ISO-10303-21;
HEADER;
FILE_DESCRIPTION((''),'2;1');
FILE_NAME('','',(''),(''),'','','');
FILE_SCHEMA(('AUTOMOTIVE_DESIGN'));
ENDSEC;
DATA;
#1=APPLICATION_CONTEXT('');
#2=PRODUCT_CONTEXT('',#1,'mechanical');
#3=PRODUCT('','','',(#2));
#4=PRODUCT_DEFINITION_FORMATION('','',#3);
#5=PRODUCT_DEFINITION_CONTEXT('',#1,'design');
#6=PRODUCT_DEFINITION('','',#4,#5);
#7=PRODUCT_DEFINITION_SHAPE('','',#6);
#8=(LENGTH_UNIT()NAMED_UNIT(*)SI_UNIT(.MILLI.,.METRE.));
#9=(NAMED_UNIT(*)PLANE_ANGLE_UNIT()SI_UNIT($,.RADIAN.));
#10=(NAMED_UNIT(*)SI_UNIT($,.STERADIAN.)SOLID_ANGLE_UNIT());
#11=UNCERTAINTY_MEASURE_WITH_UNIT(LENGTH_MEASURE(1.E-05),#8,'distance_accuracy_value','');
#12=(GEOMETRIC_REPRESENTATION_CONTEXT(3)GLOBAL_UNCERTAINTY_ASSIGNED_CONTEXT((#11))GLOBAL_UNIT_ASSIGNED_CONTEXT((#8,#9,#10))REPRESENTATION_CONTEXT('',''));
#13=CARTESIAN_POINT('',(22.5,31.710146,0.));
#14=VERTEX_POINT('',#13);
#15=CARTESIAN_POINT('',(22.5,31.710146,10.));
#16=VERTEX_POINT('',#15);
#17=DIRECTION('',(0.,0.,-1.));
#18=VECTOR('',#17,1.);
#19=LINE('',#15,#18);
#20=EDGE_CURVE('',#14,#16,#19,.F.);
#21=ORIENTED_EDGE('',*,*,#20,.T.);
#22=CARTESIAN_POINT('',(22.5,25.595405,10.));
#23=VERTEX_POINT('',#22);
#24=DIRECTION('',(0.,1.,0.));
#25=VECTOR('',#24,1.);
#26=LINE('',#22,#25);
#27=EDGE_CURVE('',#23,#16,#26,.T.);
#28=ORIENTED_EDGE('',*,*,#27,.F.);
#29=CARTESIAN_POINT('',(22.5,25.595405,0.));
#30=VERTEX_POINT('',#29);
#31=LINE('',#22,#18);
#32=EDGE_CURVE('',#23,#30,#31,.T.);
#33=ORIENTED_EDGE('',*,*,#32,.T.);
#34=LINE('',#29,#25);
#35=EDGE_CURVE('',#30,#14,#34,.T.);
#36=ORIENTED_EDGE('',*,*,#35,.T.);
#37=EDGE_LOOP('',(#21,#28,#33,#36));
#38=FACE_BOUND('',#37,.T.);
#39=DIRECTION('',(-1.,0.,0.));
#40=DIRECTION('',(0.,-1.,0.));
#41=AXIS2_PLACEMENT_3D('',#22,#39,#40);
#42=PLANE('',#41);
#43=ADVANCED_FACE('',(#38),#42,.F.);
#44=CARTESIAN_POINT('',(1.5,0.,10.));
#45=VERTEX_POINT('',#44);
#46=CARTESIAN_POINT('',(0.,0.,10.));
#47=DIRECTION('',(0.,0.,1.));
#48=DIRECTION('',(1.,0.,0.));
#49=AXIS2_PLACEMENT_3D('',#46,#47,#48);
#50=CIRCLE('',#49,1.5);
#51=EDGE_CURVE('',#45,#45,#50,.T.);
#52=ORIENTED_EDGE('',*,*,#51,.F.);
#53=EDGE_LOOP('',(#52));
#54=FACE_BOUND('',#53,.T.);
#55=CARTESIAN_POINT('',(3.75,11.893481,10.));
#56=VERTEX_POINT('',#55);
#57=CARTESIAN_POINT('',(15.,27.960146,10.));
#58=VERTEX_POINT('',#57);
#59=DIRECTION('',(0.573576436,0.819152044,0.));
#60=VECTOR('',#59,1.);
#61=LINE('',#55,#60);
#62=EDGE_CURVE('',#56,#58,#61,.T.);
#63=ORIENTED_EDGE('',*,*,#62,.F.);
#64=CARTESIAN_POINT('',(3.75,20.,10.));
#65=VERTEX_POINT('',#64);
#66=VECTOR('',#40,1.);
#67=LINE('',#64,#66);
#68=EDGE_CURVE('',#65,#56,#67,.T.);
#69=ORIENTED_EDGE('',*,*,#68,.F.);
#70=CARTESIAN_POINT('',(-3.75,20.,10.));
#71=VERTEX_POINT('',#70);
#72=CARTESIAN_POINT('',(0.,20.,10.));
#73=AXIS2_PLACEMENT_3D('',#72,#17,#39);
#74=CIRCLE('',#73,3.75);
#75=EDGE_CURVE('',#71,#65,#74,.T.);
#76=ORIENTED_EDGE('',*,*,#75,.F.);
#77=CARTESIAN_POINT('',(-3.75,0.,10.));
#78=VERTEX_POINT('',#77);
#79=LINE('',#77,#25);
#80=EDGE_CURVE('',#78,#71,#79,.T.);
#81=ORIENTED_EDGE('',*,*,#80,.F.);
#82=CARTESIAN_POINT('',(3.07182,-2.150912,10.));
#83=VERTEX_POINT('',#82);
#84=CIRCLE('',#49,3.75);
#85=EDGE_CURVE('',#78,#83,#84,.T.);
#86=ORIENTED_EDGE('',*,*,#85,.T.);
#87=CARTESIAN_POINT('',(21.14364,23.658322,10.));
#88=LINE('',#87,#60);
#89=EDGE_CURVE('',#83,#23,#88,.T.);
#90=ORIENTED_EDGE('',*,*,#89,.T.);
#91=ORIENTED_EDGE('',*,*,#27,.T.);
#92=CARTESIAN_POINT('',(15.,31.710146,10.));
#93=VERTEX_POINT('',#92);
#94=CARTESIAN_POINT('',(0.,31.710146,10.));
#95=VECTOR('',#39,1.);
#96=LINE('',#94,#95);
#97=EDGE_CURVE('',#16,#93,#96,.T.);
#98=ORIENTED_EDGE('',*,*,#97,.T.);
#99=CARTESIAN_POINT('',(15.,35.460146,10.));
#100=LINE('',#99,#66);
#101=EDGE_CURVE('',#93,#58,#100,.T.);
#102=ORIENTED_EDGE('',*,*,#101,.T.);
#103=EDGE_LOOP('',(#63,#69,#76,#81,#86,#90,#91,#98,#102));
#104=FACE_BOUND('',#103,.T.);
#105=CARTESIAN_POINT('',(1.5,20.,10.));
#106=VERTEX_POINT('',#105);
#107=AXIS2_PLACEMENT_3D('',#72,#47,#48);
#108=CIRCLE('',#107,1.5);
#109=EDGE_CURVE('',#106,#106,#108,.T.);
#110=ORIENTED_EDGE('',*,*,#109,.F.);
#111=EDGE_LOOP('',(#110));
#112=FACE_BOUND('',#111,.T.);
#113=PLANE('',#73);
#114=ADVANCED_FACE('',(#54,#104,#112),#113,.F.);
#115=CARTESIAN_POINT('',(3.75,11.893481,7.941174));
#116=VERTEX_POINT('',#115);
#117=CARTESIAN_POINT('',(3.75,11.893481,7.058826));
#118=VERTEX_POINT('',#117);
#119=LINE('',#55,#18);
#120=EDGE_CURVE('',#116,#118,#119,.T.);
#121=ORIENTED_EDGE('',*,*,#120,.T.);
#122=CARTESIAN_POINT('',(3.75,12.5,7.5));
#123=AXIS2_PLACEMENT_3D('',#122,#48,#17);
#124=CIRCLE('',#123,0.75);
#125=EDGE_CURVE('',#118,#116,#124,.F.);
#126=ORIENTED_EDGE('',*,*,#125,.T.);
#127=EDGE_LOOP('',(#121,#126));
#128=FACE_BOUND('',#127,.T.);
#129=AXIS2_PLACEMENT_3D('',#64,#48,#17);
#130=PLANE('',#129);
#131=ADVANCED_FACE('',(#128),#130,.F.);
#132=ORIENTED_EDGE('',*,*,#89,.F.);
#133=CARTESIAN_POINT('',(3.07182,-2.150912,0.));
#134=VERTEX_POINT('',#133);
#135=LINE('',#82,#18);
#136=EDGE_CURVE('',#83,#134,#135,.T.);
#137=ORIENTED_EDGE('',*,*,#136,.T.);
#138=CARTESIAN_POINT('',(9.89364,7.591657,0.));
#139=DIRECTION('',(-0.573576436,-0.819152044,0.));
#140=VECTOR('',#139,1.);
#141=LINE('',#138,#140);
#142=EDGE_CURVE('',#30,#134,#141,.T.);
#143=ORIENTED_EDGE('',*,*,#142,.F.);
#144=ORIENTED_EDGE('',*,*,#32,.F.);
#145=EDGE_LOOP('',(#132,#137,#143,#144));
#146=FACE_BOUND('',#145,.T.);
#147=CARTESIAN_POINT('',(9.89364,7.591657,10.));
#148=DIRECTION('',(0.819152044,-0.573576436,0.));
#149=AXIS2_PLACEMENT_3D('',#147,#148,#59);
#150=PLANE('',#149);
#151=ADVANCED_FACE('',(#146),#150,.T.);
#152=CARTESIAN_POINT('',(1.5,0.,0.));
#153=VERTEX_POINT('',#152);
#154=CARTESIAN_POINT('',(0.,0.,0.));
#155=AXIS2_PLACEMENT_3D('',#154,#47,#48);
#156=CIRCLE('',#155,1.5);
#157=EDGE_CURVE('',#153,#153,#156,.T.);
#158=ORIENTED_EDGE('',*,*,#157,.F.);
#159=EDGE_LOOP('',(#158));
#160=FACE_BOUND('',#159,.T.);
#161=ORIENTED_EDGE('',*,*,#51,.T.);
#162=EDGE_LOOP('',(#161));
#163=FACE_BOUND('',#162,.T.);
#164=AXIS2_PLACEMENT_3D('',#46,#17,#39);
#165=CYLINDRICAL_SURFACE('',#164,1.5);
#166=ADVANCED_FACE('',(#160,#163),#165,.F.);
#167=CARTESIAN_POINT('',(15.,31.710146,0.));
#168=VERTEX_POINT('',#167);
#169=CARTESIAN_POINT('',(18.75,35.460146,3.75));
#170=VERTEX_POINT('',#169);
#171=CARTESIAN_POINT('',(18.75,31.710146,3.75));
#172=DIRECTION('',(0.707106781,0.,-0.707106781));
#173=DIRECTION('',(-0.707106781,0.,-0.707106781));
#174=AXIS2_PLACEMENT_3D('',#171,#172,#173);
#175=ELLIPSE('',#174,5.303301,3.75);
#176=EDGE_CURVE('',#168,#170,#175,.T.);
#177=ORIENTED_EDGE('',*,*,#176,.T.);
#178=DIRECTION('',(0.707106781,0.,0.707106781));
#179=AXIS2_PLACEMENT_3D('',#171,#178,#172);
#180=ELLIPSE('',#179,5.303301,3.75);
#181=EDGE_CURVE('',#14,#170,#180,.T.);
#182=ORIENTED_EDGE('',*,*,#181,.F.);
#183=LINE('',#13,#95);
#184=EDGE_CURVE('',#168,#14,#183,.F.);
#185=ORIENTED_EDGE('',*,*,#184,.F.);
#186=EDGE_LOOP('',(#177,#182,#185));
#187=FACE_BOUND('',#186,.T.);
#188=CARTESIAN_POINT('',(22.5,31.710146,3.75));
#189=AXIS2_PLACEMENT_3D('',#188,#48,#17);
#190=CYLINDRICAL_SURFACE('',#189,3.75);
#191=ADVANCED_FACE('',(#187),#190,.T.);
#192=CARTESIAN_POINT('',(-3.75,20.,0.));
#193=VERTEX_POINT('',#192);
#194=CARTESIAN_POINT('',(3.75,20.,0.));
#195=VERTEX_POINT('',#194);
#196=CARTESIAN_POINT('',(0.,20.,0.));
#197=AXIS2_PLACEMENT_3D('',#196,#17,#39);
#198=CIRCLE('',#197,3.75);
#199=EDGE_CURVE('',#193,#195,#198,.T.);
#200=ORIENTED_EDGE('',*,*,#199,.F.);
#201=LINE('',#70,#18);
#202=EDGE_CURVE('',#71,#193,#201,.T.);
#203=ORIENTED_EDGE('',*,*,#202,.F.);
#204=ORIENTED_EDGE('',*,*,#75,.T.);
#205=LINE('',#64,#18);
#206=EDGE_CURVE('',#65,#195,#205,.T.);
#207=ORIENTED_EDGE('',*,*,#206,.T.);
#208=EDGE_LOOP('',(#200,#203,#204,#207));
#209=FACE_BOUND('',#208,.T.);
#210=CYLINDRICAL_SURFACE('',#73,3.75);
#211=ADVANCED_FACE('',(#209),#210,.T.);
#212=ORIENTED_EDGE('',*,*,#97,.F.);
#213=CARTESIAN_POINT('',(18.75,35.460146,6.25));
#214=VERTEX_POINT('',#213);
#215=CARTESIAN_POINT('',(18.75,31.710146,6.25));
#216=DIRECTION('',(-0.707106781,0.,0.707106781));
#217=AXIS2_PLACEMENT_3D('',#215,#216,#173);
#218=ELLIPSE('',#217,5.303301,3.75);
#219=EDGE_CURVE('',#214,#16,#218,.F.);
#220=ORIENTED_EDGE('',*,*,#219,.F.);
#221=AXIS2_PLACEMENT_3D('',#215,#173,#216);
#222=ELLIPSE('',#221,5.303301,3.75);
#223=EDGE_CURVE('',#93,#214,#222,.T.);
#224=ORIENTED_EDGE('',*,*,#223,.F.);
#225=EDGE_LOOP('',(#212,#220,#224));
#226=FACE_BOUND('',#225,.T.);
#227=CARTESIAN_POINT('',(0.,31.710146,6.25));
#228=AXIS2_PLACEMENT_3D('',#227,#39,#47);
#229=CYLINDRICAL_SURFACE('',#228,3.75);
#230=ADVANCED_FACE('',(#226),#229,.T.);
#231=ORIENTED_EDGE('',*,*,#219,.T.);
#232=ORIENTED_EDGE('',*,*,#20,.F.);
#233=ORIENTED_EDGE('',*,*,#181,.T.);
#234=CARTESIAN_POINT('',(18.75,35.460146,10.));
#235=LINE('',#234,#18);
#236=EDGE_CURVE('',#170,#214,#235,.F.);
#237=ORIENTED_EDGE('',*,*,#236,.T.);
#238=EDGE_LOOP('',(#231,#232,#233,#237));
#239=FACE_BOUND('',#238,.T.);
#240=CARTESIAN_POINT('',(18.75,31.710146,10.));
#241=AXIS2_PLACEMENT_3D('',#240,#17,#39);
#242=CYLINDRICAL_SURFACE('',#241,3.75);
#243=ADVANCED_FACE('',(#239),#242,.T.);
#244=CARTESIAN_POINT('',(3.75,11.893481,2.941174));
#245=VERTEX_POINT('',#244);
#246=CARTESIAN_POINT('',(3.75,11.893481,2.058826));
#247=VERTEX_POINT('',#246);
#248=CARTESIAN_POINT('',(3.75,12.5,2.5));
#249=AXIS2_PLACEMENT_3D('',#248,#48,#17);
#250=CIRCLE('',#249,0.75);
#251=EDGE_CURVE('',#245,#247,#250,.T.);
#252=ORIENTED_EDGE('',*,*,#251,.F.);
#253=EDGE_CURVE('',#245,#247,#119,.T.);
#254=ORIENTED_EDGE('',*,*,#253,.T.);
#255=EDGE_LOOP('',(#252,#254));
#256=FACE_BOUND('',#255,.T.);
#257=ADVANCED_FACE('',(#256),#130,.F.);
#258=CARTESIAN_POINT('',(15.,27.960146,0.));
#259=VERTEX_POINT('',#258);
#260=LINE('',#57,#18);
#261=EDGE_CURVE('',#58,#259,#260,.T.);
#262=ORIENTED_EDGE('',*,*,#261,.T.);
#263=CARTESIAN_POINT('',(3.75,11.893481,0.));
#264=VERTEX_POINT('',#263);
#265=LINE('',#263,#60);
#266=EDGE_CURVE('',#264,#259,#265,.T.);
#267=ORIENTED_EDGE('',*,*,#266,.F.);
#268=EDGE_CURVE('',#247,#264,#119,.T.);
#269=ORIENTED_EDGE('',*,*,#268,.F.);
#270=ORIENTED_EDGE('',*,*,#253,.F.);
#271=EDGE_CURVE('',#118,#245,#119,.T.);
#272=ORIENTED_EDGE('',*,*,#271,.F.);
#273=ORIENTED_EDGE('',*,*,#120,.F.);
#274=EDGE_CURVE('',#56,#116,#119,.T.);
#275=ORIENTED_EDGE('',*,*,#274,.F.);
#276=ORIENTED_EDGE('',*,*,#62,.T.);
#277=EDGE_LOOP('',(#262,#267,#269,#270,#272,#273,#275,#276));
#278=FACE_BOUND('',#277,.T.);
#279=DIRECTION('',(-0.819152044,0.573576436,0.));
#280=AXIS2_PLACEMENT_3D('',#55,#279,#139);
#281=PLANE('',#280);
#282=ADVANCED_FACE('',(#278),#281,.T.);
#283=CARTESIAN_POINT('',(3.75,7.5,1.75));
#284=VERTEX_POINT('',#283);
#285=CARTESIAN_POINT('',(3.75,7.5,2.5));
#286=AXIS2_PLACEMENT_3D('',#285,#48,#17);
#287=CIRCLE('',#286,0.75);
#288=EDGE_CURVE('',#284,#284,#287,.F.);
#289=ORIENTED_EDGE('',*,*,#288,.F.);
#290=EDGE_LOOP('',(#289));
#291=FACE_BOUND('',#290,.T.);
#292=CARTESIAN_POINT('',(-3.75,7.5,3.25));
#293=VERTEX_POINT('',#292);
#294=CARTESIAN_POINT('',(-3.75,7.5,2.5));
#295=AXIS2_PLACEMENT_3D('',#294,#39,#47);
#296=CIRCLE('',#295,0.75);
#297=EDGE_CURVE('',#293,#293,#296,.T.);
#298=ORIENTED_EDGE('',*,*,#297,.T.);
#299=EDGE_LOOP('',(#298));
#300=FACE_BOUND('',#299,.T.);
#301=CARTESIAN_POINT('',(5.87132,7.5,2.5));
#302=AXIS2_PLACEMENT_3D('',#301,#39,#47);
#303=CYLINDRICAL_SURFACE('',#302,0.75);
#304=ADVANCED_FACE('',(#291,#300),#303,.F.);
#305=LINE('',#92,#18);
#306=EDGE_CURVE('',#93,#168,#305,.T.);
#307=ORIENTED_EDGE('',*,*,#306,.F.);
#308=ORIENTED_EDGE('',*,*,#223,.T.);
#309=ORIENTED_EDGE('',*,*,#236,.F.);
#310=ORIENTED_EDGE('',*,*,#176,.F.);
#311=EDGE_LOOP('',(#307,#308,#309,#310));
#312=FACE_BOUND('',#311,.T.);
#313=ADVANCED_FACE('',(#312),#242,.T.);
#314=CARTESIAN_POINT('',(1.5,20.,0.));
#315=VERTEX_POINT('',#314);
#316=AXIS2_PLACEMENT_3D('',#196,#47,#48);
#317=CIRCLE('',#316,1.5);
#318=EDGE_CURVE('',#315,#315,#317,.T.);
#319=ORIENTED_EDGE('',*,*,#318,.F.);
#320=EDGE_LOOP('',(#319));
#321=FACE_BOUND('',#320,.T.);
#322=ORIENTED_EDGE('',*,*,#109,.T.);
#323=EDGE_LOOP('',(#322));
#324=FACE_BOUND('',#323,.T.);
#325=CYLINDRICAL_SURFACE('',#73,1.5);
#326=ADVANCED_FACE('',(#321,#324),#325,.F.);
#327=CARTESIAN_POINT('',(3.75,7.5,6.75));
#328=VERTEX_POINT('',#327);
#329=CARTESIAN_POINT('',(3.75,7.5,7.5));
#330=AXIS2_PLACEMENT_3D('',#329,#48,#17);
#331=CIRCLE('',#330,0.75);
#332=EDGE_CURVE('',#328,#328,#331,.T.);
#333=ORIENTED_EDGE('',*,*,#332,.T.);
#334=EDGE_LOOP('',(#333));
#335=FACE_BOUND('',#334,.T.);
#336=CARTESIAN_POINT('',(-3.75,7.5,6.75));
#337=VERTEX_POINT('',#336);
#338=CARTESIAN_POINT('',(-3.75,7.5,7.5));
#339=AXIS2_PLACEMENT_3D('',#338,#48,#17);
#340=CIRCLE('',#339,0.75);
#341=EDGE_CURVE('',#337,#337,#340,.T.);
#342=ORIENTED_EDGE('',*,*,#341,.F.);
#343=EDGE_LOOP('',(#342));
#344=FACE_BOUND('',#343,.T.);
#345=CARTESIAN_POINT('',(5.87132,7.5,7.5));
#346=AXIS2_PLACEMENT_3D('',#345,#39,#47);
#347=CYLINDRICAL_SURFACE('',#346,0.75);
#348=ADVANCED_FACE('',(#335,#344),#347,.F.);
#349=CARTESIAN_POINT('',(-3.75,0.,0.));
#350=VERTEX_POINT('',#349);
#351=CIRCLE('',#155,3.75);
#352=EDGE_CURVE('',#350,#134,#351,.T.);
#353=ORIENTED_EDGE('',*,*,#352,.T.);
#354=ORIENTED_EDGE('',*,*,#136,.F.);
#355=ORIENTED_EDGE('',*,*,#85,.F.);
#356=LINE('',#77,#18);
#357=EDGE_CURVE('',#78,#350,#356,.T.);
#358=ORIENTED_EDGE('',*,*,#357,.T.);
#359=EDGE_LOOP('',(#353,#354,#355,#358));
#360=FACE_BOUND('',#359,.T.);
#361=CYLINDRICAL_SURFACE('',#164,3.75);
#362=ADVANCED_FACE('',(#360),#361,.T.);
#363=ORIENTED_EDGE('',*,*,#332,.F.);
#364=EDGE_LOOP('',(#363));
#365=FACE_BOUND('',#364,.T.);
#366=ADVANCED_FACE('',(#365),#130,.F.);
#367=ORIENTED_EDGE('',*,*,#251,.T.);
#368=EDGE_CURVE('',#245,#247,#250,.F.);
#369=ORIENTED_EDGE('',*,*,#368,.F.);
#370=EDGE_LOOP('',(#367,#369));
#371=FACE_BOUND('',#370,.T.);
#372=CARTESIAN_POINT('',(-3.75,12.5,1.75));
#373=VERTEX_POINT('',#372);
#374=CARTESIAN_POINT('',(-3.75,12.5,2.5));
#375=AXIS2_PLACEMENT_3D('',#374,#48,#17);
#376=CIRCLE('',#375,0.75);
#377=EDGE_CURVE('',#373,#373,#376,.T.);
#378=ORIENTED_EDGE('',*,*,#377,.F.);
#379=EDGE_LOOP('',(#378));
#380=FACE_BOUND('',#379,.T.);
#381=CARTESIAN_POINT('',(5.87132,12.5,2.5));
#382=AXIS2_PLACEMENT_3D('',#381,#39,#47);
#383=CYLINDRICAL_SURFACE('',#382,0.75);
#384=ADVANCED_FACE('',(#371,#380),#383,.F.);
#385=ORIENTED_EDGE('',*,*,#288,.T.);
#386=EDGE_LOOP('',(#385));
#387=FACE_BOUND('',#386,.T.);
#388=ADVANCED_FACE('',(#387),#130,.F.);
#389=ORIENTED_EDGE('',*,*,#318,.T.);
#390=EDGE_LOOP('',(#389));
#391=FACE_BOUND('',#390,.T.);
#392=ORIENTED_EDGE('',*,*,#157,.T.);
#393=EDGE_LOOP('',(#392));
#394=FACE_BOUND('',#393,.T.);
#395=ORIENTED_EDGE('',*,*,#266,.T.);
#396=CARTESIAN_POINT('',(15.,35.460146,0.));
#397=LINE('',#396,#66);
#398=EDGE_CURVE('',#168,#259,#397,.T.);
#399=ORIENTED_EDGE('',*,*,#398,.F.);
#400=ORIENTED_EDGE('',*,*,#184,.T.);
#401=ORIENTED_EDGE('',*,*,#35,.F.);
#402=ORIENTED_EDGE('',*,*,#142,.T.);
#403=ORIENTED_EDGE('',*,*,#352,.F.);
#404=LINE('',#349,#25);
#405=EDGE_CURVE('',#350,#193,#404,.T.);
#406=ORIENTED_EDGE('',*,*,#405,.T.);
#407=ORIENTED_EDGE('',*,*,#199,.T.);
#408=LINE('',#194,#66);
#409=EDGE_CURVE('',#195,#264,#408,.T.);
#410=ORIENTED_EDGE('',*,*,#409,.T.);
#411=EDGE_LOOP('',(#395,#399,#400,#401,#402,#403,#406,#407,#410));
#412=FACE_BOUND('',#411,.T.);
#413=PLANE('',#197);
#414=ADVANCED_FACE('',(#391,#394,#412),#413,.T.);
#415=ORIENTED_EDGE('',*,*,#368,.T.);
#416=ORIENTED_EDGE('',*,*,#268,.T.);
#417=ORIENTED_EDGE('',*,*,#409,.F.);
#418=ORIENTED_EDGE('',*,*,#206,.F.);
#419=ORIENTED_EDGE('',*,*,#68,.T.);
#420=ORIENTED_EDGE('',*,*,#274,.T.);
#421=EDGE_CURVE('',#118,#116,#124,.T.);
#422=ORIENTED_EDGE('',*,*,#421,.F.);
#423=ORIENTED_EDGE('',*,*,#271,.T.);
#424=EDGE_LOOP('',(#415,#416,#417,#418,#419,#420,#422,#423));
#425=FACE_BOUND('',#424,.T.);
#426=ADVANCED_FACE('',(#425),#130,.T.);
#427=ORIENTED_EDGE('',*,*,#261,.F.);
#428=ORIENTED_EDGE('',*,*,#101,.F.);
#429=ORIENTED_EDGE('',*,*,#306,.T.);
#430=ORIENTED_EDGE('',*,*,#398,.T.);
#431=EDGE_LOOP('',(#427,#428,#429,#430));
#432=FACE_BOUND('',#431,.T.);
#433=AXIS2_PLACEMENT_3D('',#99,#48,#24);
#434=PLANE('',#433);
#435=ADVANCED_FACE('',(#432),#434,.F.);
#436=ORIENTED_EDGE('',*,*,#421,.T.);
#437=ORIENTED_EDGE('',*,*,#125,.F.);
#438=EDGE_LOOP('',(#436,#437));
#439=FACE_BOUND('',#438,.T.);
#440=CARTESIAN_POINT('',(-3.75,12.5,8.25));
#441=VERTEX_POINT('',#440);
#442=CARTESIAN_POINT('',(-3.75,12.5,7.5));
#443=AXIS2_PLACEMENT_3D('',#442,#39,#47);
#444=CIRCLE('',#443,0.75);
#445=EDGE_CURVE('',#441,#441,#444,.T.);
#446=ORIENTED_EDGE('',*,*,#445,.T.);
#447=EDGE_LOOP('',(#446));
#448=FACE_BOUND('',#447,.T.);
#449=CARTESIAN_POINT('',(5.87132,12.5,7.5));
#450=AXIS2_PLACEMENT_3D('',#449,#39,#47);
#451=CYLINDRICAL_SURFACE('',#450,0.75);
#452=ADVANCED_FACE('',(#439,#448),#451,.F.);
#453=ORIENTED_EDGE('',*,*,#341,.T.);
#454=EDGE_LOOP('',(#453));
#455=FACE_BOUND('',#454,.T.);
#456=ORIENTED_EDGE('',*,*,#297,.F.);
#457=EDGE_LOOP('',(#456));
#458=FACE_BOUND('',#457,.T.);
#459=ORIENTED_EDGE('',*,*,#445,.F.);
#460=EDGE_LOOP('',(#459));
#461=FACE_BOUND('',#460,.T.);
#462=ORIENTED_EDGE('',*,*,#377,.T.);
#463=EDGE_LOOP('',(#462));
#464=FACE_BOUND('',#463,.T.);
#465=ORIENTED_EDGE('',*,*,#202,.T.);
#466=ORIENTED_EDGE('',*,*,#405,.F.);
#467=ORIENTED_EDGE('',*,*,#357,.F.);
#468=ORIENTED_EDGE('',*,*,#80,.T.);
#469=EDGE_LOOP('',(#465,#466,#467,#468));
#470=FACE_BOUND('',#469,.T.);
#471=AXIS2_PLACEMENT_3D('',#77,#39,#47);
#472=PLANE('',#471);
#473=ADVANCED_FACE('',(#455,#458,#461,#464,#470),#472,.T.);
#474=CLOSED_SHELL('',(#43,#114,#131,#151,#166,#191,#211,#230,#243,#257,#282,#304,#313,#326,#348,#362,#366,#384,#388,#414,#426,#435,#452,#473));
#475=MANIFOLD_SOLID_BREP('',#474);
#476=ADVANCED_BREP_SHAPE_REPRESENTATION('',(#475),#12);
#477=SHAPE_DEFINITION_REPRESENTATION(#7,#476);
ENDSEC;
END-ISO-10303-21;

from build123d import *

# Parameters (mm, degrees)
SKETCH1_R           = 1.5
BOSS_EXTRUDE1_DEPTH = 10
FILLET1_R           = 3.75
SKETCH2_R           = 0.75
CUT_EXTRUDE1_DEPTH  = 7.5


with BuildPart() as part:
    # Sketch1 → Boss-Extrude1 (new body)
    with BuildSketch(Plane.XY):
        with BuildLine():
            Line((-3.75, 0), (-3.75, 20))
            ThreePointArc((-3.75, 20), (0, 23.75), (3.75, 20))
            Line((3.75, 20), (3.75, 11.893480509))
            Line((3.75, 11.893480509), (15, 27.960145585))
            Line((15, 27.960145585), (15, 35.460145585))
            Line((15, 35.460145585), (22.5, 35.460145585))
            Line((22.5, 35.460145585), (22.5, 25.595404668))
            Line((22.5, 25.595404668), (21.143640332, 23.658322312))
            Line((21.143640332, 23.658322312), (9.893640332, 7.591657236))
            Line((9.893640332, 7.591657236), (3.071820166, -2.150911636))
            ThreePointArc((3.071820166, -2.150911636), (-1.127646748, -3.576438565), (-3.75, 0))
        make_face()
        Circle(SKETCH1_R, mode=Mode.SUBTRACT)
        with Locations((0, 20)):
            Circle(SKETCH1_R, mode=Mode.SUBTRACT)
    extrude(amount=BOSS_EXTRUDE1_DEPTH)

    # Fillet1
    fillet1_edges = [part.edges().sort_by_distance(p)[0] for p in [
        (18.75, 35.460145585, 0),
        (22.5, 35.460145585, 5),
        (15, 35.460145585, 5),
        (18.75, 35.460145585, 10),
    ]]
    fillet(fillet1_edges, radius=FILLET1_R - 0.0001)  # a hair under: the kernel refuses the full size

    # Sketch2 → Cut-Extrude1 (cut)
    with BuildSketch(Plane.ZY.offset(3.75)):
        with Locations((7.5, 12.5)):
            Circle(SKETCH2_R)
        with Locations(Location((7.5, 7.5, 0), (0, 0, 180))):
            Circle(SKETCH2_R)
        with Locations((2.5, 7.5)):
            Circle(SKETCH2_R)
        with Locations(Location((2.5, 12.5, 0), (0, 0, 306.031603779))):
            Circle(SKETCH2_R)
    extrude(amount=-CUT_EXTRUDE1_DEPTH, mode=Mode.SUBTRACT)


solid = part.part
